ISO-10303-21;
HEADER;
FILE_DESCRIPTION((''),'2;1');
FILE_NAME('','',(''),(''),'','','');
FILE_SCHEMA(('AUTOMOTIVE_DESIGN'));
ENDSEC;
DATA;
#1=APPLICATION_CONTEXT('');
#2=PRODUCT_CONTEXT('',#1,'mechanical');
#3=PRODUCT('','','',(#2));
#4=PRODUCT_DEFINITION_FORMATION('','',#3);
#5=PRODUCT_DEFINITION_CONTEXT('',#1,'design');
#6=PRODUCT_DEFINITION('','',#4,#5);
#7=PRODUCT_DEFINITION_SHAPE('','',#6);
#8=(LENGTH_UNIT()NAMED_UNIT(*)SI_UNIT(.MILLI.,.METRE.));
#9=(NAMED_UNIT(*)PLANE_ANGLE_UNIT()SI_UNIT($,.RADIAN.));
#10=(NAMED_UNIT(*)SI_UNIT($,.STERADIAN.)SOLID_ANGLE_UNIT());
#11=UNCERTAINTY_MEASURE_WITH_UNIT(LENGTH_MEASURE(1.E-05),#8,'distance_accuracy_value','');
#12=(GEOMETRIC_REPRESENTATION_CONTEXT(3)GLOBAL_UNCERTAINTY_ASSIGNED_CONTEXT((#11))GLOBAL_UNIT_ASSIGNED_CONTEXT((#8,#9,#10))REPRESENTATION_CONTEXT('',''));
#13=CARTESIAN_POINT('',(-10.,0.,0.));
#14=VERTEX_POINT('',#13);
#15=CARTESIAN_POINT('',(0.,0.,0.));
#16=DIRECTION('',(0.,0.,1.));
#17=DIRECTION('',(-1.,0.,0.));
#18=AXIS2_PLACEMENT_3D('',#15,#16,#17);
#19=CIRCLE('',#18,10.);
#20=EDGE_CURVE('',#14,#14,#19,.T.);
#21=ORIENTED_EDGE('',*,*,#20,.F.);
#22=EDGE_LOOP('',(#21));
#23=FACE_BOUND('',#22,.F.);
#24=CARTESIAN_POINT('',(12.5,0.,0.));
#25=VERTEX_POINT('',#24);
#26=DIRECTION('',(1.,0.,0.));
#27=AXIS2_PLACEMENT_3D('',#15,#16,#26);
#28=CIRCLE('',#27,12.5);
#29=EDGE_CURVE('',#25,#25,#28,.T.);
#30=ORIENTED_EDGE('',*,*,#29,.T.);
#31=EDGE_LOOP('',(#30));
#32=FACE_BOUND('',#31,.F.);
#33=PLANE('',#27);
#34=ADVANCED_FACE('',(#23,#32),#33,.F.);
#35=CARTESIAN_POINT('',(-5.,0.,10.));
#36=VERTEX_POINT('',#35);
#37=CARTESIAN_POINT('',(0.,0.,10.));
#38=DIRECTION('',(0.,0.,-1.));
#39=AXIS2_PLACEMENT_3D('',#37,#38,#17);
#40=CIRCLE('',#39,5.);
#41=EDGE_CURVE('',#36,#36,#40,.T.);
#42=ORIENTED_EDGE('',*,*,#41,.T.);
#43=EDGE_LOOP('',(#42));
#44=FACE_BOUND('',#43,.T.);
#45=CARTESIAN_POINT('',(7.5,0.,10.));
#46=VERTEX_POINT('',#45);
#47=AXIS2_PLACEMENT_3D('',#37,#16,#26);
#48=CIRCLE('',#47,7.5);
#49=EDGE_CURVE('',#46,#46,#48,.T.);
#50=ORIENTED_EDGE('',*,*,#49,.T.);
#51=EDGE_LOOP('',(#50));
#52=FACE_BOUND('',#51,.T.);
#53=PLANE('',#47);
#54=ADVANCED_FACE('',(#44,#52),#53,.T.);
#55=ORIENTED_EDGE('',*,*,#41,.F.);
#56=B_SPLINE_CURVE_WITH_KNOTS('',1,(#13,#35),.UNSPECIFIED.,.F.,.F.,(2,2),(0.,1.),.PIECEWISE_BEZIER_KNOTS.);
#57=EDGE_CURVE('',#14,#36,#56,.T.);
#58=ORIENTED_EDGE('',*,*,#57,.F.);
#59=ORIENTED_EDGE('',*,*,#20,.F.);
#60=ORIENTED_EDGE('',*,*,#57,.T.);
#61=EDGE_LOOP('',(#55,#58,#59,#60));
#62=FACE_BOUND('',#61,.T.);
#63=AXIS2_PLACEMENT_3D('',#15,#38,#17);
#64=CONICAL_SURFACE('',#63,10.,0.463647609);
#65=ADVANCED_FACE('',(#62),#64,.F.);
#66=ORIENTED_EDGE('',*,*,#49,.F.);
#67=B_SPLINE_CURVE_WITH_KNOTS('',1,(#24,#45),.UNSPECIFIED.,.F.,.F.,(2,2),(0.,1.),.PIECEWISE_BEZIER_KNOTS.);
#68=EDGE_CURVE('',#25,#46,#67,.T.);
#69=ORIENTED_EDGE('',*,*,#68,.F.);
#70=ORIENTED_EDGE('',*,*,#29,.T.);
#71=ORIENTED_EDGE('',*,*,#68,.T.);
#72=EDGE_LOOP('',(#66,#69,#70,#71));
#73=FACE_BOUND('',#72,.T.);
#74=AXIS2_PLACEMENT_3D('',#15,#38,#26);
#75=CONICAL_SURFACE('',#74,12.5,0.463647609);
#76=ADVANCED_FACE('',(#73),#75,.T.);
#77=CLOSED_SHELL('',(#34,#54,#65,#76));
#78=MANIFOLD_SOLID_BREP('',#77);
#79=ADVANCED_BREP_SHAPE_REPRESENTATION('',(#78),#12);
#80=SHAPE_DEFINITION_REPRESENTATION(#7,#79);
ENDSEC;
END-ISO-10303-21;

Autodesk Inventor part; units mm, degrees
ref_plane "YZ Plane" through (0, 0, 0) normal (1, 0, 0) x (0, 1, 0)
ref_plane "XZ Plane" through (0, 0, 0) normal (0, 1, 0) x (-1, 0, 0)
sketch "Esquisse1" plane through (0, 0, 0) normal (0, 0, 1) x (1, 0, 0)
  circle A0 centre (0, 0) radius 12.5
  dimension "d0" = 25
ref_plane "Plan de construction4" through (0, 0, 10) normal (0, 0, 1) x (1, 0, 0)
sketch "Esquisse2" plane through (0, 0, 10) normal (0, 0, 1) x (1, 0, 0)
  circle A0 centre (0, 0) radius 7.5
  dimension "d2" = 15
loft "Lissage1" add profiles "Esquisse1", "Esquisse2"
sketch "Esquisse3" plane through (0, 0, 10) normal (0, 0, 1) x (1, 0, 0)
  circle A0 centre (0, 0) radius 5
  dimension "d7" = 10
sketch "Esquisse4" plane through (0, 0, 0) normal (0, 0, -1) x (-1, 0, 0)
  circle A0 centre (0, 0) radius 10
  dimension "d8" = 20
extrude "Extrusion1" cut sketch "Esquisse3" against normal blind 22
loft "Lissage2" cut profiles "Esquisse4" section 2 edges at (-5, 0, 10)
properties part number "Frustrum"
